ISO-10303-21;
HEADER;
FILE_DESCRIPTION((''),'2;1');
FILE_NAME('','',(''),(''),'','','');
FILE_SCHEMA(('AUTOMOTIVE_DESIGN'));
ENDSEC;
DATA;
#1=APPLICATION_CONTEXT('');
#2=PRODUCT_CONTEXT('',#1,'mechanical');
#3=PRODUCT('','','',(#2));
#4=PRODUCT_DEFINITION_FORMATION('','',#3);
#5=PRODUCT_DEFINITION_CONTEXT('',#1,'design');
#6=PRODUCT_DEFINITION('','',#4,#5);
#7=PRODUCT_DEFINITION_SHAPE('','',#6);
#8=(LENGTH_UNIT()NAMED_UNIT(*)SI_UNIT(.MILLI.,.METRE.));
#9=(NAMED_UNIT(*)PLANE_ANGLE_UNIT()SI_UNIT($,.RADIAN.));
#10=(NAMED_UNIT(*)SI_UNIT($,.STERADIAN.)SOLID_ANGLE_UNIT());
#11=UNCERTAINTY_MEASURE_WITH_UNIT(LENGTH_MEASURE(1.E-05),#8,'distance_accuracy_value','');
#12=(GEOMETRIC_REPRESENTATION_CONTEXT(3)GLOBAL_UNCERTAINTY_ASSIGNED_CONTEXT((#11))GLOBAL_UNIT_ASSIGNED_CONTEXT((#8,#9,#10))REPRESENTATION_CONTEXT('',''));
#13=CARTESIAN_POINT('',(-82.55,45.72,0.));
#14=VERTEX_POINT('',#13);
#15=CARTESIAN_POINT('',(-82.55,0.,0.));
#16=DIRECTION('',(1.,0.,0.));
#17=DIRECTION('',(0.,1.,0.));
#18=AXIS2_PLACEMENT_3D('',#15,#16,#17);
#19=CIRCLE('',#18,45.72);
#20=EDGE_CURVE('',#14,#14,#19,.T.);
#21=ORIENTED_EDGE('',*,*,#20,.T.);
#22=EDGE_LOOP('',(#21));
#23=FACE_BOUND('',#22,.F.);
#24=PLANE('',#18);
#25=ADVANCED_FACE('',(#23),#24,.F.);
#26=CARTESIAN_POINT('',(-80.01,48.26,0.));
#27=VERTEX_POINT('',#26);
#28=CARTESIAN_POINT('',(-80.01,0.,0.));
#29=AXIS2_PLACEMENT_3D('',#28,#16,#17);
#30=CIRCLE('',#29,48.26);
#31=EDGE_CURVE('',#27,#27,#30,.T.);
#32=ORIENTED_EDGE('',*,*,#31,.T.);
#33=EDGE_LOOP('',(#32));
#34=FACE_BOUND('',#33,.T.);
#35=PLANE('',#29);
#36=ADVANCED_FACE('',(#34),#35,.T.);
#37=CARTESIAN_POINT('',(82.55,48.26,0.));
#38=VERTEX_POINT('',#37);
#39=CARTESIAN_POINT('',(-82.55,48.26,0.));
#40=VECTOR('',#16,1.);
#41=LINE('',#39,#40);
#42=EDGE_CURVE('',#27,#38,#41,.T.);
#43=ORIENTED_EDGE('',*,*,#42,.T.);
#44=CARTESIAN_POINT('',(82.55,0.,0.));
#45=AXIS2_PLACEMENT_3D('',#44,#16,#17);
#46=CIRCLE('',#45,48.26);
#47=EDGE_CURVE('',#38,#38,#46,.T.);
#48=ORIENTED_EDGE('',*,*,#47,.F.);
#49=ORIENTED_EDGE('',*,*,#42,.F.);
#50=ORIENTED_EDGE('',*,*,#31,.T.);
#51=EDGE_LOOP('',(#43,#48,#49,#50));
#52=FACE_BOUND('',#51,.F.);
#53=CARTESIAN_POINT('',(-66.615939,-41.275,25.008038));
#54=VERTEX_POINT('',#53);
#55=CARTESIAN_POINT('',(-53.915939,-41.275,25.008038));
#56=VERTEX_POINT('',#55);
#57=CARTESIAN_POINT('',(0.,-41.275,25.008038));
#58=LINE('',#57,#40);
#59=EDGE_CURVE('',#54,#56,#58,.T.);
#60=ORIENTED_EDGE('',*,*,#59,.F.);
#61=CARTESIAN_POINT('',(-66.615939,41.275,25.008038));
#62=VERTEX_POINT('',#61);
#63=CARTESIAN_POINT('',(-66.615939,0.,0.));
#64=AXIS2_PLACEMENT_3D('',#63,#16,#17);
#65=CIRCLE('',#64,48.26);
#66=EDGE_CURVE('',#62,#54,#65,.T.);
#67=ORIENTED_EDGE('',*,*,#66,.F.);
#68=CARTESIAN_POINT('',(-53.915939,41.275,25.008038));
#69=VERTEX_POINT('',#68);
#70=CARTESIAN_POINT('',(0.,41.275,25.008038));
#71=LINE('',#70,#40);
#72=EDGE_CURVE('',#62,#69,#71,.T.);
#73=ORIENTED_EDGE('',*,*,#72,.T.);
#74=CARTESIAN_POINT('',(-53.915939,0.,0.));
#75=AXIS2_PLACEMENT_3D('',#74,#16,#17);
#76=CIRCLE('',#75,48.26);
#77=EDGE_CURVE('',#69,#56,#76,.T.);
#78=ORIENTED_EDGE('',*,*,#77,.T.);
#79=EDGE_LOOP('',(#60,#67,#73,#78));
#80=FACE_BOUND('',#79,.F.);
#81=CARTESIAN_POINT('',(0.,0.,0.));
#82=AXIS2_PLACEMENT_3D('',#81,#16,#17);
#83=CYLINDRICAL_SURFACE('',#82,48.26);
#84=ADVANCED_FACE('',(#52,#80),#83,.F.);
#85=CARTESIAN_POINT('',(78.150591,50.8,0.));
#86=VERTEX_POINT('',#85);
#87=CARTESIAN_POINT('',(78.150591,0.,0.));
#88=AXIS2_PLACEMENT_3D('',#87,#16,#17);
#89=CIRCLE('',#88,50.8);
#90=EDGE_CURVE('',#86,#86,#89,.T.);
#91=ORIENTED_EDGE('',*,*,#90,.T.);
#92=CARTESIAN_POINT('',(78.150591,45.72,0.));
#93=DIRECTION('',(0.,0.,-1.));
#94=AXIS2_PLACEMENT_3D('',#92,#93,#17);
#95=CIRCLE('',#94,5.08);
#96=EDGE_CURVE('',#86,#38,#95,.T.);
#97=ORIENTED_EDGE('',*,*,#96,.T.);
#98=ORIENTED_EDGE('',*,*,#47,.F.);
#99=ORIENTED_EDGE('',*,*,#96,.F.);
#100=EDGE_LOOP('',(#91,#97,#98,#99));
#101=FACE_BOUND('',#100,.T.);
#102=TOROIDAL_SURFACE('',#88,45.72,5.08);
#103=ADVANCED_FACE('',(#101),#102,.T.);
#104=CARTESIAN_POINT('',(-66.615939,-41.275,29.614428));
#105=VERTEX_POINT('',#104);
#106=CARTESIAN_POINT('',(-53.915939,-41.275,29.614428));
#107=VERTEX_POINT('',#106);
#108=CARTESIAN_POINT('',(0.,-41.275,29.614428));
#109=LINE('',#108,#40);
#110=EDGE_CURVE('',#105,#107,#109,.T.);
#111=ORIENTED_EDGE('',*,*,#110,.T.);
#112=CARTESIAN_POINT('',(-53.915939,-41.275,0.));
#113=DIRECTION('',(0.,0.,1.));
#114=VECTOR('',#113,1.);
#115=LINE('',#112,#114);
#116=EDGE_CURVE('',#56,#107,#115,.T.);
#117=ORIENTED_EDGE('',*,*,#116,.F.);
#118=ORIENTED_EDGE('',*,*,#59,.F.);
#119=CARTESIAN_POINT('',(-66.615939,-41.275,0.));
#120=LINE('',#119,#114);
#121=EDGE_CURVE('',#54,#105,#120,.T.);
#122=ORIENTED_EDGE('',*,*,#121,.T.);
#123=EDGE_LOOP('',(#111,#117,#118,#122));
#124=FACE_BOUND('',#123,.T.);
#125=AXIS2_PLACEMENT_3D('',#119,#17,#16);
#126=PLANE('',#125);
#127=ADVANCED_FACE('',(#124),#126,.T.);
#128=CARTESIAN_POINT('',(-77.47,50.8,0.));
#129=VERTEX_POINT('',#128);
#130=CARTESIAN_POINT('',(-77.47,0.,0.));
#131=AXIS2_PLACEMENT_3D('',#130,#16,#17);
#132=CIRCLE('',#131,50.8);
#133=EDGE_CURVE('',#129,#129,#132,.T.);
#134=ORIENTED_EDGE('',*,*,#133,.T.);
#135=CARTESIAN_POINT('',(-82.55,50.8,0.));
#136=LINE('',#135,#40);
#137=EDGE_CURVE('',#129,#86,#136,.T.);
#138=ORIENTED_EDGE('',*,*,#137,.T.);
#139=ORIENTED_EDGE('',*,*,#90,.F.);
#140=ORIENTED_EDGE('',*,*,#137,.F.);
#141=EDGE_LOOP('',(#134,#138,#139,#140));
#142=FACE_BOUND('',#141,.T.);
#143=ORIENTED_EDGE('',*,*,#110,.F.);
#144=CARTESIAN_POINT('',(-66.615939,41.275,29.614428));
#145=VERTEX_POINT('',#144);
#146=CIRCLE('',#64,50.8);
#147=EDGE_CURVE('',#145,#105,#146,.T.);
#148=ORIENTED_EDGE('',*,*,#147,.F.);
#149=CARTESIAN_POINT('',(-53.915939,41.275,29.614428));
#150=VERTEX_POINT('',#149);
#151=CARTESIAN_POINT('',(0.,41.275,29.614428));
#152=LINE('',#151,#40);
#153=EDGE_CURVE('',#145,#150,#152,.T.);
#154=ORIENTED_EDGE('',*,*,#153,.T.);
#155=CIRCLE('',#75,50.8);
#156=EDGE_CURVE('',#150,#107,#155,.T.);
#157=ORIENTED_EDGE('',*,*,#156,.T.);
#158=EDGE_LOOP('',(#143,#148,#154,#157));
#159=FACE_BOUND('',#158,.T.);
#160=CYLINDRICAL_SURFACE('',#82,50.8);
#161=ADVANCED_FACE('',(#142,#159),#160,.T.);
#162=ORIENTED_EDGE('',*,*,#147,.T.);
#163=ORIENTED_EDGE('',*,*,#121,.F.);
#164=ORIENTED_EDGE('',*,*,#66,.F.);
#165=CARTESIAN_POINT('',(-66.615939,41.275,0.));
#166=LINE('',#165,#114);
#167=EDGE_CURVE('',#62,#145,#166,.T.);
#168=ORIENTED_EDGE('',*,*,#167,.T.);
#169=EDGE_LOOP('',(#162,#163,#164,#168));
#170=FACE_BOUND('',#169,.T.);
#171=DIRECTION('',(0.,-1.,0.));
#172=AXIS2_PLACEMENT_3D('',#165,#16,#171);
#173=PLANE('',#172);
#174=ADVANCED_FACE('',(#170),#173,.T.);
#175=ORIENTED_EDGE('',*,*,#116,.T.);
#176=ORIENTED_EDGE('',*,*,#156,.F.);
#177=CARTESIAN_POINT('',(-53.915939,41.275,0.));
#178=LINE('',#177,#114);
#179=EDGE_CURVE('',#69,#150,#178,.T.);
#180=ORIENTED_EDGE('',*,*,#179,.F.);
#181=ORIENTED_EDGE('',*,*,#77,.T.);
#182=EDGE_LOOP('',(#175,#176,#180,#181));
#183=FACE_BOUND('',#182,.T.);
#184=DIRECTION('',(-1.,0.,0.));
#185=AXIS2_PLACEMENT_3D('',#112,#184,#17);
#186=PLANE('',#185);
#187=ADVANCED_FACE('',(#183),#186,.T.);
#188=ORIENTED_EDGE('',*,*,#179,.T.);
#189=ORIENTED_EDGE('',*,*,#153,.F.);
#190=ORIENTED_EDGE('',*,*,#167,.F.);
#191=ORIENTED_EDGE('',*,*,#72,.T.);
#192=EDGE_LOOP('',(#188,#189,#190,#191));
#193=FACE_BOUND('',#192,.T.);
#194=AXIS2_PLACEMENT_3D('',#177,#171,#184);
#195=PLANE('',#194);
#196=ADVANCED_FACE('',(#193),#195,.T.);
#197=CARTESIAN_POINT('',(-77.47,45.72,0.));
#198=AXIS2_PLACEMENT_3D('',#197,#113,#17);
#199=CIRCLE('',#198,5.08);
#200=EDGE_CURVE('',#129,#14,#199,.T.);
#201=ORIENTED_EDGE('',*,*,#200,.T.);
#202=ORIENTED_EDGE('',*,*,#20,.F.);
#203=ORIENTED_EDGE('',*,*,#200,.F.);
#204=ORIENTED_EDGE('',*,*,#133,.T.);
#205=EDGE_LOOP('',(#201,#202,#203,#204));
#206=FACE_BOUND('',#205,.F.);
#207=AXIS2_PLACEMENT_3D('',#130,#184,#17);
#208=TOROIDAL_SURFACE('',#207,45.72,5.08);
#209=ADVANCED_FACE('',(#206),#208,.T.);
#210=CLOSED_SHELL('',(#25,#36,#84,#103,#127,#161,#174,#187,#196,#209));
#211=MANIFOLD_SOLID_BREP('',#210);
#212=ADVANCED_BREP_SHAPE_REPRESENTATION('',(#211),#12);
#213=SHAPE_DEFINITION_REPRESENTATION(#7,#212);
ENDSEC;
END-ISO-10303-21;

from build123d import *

# Parameters (mm, degrees)
F0_R     = 50.8
F1_DEPTH = 82.55
F2_T     = -2.54
F5_DEPTH = 152.4


# Not quite as in the source:
# - a fillet or chamfer that OpenCascade refuses, or shapes differently, is made with other operations: its cross-section is extruded or revolved along the edge and cut away or added


with BuildPart() as f1:
    # F0 (on Right) → F1 (new body, symmetric)
    with BuildSketch(Plane.YZ):
        Circle(F0_R)
    extrude(amount=F1_DEPTH, both=True)

    # F2
    f2_openings = [f1.faces().sort_by_distance(p)[0] for p in [
        (82.55, 0, 0),
    ]]
    offset(amount=F2_T, openings=f2_openings)

    # F3: fillet of radius 5.08 on 3 edges, made by hand

    # F3_s1 → F3_t2 (revolve, cut)
    with BuildSketch(Plane.XY):
        with BuildLine():
            ThreePointArc((-77.47, 50.8), (-81.0621024484, 49.3121024484), (-82.55, 45.72))
            Line((-82.55, 45.72), (-82.55, 50.8))
            Line((-82.55, 50.8), (-77.47, 50.8))
        make_face()
    revolve(axis=Axis((-82.55, 0, 0), (1, 0, 0)), mode=Mode.SUBTRACT)

    # F3_s3 → F3_t4 (revolve, cut)
    with BuildSketch(Plane.XY):
        with BuildLine():
            ThreePointArc((78.1505909488, 50.8), (80.6905909488, 50.1194090512), (82.55, 48.26))
            Line((82.55, 48.26), (82.55, 50.8))
            Line((82.55, 50.8), (78.1505909488, 50.8))
        make_face()
    revolve(axis=Axis((82.55, 0, 0), (1, 0, 0)), mode=Mode.SUBTRACT)

    # F4 (on Top) → F5 (cut)
    with BuildSketch(Plane.XY):
        Polygon((-53.9159391403, 0), (-53.9159391403, 41.275), (-66.6159391403, 41.275), (-66.6159391403, 0), (-66.6159391403, -41.275), (-53.9159391403, -41.275), align=None)
    extrude(amount=F5_DEPTH, mode=Mode.SUBTRACT)


solid = f1.part
